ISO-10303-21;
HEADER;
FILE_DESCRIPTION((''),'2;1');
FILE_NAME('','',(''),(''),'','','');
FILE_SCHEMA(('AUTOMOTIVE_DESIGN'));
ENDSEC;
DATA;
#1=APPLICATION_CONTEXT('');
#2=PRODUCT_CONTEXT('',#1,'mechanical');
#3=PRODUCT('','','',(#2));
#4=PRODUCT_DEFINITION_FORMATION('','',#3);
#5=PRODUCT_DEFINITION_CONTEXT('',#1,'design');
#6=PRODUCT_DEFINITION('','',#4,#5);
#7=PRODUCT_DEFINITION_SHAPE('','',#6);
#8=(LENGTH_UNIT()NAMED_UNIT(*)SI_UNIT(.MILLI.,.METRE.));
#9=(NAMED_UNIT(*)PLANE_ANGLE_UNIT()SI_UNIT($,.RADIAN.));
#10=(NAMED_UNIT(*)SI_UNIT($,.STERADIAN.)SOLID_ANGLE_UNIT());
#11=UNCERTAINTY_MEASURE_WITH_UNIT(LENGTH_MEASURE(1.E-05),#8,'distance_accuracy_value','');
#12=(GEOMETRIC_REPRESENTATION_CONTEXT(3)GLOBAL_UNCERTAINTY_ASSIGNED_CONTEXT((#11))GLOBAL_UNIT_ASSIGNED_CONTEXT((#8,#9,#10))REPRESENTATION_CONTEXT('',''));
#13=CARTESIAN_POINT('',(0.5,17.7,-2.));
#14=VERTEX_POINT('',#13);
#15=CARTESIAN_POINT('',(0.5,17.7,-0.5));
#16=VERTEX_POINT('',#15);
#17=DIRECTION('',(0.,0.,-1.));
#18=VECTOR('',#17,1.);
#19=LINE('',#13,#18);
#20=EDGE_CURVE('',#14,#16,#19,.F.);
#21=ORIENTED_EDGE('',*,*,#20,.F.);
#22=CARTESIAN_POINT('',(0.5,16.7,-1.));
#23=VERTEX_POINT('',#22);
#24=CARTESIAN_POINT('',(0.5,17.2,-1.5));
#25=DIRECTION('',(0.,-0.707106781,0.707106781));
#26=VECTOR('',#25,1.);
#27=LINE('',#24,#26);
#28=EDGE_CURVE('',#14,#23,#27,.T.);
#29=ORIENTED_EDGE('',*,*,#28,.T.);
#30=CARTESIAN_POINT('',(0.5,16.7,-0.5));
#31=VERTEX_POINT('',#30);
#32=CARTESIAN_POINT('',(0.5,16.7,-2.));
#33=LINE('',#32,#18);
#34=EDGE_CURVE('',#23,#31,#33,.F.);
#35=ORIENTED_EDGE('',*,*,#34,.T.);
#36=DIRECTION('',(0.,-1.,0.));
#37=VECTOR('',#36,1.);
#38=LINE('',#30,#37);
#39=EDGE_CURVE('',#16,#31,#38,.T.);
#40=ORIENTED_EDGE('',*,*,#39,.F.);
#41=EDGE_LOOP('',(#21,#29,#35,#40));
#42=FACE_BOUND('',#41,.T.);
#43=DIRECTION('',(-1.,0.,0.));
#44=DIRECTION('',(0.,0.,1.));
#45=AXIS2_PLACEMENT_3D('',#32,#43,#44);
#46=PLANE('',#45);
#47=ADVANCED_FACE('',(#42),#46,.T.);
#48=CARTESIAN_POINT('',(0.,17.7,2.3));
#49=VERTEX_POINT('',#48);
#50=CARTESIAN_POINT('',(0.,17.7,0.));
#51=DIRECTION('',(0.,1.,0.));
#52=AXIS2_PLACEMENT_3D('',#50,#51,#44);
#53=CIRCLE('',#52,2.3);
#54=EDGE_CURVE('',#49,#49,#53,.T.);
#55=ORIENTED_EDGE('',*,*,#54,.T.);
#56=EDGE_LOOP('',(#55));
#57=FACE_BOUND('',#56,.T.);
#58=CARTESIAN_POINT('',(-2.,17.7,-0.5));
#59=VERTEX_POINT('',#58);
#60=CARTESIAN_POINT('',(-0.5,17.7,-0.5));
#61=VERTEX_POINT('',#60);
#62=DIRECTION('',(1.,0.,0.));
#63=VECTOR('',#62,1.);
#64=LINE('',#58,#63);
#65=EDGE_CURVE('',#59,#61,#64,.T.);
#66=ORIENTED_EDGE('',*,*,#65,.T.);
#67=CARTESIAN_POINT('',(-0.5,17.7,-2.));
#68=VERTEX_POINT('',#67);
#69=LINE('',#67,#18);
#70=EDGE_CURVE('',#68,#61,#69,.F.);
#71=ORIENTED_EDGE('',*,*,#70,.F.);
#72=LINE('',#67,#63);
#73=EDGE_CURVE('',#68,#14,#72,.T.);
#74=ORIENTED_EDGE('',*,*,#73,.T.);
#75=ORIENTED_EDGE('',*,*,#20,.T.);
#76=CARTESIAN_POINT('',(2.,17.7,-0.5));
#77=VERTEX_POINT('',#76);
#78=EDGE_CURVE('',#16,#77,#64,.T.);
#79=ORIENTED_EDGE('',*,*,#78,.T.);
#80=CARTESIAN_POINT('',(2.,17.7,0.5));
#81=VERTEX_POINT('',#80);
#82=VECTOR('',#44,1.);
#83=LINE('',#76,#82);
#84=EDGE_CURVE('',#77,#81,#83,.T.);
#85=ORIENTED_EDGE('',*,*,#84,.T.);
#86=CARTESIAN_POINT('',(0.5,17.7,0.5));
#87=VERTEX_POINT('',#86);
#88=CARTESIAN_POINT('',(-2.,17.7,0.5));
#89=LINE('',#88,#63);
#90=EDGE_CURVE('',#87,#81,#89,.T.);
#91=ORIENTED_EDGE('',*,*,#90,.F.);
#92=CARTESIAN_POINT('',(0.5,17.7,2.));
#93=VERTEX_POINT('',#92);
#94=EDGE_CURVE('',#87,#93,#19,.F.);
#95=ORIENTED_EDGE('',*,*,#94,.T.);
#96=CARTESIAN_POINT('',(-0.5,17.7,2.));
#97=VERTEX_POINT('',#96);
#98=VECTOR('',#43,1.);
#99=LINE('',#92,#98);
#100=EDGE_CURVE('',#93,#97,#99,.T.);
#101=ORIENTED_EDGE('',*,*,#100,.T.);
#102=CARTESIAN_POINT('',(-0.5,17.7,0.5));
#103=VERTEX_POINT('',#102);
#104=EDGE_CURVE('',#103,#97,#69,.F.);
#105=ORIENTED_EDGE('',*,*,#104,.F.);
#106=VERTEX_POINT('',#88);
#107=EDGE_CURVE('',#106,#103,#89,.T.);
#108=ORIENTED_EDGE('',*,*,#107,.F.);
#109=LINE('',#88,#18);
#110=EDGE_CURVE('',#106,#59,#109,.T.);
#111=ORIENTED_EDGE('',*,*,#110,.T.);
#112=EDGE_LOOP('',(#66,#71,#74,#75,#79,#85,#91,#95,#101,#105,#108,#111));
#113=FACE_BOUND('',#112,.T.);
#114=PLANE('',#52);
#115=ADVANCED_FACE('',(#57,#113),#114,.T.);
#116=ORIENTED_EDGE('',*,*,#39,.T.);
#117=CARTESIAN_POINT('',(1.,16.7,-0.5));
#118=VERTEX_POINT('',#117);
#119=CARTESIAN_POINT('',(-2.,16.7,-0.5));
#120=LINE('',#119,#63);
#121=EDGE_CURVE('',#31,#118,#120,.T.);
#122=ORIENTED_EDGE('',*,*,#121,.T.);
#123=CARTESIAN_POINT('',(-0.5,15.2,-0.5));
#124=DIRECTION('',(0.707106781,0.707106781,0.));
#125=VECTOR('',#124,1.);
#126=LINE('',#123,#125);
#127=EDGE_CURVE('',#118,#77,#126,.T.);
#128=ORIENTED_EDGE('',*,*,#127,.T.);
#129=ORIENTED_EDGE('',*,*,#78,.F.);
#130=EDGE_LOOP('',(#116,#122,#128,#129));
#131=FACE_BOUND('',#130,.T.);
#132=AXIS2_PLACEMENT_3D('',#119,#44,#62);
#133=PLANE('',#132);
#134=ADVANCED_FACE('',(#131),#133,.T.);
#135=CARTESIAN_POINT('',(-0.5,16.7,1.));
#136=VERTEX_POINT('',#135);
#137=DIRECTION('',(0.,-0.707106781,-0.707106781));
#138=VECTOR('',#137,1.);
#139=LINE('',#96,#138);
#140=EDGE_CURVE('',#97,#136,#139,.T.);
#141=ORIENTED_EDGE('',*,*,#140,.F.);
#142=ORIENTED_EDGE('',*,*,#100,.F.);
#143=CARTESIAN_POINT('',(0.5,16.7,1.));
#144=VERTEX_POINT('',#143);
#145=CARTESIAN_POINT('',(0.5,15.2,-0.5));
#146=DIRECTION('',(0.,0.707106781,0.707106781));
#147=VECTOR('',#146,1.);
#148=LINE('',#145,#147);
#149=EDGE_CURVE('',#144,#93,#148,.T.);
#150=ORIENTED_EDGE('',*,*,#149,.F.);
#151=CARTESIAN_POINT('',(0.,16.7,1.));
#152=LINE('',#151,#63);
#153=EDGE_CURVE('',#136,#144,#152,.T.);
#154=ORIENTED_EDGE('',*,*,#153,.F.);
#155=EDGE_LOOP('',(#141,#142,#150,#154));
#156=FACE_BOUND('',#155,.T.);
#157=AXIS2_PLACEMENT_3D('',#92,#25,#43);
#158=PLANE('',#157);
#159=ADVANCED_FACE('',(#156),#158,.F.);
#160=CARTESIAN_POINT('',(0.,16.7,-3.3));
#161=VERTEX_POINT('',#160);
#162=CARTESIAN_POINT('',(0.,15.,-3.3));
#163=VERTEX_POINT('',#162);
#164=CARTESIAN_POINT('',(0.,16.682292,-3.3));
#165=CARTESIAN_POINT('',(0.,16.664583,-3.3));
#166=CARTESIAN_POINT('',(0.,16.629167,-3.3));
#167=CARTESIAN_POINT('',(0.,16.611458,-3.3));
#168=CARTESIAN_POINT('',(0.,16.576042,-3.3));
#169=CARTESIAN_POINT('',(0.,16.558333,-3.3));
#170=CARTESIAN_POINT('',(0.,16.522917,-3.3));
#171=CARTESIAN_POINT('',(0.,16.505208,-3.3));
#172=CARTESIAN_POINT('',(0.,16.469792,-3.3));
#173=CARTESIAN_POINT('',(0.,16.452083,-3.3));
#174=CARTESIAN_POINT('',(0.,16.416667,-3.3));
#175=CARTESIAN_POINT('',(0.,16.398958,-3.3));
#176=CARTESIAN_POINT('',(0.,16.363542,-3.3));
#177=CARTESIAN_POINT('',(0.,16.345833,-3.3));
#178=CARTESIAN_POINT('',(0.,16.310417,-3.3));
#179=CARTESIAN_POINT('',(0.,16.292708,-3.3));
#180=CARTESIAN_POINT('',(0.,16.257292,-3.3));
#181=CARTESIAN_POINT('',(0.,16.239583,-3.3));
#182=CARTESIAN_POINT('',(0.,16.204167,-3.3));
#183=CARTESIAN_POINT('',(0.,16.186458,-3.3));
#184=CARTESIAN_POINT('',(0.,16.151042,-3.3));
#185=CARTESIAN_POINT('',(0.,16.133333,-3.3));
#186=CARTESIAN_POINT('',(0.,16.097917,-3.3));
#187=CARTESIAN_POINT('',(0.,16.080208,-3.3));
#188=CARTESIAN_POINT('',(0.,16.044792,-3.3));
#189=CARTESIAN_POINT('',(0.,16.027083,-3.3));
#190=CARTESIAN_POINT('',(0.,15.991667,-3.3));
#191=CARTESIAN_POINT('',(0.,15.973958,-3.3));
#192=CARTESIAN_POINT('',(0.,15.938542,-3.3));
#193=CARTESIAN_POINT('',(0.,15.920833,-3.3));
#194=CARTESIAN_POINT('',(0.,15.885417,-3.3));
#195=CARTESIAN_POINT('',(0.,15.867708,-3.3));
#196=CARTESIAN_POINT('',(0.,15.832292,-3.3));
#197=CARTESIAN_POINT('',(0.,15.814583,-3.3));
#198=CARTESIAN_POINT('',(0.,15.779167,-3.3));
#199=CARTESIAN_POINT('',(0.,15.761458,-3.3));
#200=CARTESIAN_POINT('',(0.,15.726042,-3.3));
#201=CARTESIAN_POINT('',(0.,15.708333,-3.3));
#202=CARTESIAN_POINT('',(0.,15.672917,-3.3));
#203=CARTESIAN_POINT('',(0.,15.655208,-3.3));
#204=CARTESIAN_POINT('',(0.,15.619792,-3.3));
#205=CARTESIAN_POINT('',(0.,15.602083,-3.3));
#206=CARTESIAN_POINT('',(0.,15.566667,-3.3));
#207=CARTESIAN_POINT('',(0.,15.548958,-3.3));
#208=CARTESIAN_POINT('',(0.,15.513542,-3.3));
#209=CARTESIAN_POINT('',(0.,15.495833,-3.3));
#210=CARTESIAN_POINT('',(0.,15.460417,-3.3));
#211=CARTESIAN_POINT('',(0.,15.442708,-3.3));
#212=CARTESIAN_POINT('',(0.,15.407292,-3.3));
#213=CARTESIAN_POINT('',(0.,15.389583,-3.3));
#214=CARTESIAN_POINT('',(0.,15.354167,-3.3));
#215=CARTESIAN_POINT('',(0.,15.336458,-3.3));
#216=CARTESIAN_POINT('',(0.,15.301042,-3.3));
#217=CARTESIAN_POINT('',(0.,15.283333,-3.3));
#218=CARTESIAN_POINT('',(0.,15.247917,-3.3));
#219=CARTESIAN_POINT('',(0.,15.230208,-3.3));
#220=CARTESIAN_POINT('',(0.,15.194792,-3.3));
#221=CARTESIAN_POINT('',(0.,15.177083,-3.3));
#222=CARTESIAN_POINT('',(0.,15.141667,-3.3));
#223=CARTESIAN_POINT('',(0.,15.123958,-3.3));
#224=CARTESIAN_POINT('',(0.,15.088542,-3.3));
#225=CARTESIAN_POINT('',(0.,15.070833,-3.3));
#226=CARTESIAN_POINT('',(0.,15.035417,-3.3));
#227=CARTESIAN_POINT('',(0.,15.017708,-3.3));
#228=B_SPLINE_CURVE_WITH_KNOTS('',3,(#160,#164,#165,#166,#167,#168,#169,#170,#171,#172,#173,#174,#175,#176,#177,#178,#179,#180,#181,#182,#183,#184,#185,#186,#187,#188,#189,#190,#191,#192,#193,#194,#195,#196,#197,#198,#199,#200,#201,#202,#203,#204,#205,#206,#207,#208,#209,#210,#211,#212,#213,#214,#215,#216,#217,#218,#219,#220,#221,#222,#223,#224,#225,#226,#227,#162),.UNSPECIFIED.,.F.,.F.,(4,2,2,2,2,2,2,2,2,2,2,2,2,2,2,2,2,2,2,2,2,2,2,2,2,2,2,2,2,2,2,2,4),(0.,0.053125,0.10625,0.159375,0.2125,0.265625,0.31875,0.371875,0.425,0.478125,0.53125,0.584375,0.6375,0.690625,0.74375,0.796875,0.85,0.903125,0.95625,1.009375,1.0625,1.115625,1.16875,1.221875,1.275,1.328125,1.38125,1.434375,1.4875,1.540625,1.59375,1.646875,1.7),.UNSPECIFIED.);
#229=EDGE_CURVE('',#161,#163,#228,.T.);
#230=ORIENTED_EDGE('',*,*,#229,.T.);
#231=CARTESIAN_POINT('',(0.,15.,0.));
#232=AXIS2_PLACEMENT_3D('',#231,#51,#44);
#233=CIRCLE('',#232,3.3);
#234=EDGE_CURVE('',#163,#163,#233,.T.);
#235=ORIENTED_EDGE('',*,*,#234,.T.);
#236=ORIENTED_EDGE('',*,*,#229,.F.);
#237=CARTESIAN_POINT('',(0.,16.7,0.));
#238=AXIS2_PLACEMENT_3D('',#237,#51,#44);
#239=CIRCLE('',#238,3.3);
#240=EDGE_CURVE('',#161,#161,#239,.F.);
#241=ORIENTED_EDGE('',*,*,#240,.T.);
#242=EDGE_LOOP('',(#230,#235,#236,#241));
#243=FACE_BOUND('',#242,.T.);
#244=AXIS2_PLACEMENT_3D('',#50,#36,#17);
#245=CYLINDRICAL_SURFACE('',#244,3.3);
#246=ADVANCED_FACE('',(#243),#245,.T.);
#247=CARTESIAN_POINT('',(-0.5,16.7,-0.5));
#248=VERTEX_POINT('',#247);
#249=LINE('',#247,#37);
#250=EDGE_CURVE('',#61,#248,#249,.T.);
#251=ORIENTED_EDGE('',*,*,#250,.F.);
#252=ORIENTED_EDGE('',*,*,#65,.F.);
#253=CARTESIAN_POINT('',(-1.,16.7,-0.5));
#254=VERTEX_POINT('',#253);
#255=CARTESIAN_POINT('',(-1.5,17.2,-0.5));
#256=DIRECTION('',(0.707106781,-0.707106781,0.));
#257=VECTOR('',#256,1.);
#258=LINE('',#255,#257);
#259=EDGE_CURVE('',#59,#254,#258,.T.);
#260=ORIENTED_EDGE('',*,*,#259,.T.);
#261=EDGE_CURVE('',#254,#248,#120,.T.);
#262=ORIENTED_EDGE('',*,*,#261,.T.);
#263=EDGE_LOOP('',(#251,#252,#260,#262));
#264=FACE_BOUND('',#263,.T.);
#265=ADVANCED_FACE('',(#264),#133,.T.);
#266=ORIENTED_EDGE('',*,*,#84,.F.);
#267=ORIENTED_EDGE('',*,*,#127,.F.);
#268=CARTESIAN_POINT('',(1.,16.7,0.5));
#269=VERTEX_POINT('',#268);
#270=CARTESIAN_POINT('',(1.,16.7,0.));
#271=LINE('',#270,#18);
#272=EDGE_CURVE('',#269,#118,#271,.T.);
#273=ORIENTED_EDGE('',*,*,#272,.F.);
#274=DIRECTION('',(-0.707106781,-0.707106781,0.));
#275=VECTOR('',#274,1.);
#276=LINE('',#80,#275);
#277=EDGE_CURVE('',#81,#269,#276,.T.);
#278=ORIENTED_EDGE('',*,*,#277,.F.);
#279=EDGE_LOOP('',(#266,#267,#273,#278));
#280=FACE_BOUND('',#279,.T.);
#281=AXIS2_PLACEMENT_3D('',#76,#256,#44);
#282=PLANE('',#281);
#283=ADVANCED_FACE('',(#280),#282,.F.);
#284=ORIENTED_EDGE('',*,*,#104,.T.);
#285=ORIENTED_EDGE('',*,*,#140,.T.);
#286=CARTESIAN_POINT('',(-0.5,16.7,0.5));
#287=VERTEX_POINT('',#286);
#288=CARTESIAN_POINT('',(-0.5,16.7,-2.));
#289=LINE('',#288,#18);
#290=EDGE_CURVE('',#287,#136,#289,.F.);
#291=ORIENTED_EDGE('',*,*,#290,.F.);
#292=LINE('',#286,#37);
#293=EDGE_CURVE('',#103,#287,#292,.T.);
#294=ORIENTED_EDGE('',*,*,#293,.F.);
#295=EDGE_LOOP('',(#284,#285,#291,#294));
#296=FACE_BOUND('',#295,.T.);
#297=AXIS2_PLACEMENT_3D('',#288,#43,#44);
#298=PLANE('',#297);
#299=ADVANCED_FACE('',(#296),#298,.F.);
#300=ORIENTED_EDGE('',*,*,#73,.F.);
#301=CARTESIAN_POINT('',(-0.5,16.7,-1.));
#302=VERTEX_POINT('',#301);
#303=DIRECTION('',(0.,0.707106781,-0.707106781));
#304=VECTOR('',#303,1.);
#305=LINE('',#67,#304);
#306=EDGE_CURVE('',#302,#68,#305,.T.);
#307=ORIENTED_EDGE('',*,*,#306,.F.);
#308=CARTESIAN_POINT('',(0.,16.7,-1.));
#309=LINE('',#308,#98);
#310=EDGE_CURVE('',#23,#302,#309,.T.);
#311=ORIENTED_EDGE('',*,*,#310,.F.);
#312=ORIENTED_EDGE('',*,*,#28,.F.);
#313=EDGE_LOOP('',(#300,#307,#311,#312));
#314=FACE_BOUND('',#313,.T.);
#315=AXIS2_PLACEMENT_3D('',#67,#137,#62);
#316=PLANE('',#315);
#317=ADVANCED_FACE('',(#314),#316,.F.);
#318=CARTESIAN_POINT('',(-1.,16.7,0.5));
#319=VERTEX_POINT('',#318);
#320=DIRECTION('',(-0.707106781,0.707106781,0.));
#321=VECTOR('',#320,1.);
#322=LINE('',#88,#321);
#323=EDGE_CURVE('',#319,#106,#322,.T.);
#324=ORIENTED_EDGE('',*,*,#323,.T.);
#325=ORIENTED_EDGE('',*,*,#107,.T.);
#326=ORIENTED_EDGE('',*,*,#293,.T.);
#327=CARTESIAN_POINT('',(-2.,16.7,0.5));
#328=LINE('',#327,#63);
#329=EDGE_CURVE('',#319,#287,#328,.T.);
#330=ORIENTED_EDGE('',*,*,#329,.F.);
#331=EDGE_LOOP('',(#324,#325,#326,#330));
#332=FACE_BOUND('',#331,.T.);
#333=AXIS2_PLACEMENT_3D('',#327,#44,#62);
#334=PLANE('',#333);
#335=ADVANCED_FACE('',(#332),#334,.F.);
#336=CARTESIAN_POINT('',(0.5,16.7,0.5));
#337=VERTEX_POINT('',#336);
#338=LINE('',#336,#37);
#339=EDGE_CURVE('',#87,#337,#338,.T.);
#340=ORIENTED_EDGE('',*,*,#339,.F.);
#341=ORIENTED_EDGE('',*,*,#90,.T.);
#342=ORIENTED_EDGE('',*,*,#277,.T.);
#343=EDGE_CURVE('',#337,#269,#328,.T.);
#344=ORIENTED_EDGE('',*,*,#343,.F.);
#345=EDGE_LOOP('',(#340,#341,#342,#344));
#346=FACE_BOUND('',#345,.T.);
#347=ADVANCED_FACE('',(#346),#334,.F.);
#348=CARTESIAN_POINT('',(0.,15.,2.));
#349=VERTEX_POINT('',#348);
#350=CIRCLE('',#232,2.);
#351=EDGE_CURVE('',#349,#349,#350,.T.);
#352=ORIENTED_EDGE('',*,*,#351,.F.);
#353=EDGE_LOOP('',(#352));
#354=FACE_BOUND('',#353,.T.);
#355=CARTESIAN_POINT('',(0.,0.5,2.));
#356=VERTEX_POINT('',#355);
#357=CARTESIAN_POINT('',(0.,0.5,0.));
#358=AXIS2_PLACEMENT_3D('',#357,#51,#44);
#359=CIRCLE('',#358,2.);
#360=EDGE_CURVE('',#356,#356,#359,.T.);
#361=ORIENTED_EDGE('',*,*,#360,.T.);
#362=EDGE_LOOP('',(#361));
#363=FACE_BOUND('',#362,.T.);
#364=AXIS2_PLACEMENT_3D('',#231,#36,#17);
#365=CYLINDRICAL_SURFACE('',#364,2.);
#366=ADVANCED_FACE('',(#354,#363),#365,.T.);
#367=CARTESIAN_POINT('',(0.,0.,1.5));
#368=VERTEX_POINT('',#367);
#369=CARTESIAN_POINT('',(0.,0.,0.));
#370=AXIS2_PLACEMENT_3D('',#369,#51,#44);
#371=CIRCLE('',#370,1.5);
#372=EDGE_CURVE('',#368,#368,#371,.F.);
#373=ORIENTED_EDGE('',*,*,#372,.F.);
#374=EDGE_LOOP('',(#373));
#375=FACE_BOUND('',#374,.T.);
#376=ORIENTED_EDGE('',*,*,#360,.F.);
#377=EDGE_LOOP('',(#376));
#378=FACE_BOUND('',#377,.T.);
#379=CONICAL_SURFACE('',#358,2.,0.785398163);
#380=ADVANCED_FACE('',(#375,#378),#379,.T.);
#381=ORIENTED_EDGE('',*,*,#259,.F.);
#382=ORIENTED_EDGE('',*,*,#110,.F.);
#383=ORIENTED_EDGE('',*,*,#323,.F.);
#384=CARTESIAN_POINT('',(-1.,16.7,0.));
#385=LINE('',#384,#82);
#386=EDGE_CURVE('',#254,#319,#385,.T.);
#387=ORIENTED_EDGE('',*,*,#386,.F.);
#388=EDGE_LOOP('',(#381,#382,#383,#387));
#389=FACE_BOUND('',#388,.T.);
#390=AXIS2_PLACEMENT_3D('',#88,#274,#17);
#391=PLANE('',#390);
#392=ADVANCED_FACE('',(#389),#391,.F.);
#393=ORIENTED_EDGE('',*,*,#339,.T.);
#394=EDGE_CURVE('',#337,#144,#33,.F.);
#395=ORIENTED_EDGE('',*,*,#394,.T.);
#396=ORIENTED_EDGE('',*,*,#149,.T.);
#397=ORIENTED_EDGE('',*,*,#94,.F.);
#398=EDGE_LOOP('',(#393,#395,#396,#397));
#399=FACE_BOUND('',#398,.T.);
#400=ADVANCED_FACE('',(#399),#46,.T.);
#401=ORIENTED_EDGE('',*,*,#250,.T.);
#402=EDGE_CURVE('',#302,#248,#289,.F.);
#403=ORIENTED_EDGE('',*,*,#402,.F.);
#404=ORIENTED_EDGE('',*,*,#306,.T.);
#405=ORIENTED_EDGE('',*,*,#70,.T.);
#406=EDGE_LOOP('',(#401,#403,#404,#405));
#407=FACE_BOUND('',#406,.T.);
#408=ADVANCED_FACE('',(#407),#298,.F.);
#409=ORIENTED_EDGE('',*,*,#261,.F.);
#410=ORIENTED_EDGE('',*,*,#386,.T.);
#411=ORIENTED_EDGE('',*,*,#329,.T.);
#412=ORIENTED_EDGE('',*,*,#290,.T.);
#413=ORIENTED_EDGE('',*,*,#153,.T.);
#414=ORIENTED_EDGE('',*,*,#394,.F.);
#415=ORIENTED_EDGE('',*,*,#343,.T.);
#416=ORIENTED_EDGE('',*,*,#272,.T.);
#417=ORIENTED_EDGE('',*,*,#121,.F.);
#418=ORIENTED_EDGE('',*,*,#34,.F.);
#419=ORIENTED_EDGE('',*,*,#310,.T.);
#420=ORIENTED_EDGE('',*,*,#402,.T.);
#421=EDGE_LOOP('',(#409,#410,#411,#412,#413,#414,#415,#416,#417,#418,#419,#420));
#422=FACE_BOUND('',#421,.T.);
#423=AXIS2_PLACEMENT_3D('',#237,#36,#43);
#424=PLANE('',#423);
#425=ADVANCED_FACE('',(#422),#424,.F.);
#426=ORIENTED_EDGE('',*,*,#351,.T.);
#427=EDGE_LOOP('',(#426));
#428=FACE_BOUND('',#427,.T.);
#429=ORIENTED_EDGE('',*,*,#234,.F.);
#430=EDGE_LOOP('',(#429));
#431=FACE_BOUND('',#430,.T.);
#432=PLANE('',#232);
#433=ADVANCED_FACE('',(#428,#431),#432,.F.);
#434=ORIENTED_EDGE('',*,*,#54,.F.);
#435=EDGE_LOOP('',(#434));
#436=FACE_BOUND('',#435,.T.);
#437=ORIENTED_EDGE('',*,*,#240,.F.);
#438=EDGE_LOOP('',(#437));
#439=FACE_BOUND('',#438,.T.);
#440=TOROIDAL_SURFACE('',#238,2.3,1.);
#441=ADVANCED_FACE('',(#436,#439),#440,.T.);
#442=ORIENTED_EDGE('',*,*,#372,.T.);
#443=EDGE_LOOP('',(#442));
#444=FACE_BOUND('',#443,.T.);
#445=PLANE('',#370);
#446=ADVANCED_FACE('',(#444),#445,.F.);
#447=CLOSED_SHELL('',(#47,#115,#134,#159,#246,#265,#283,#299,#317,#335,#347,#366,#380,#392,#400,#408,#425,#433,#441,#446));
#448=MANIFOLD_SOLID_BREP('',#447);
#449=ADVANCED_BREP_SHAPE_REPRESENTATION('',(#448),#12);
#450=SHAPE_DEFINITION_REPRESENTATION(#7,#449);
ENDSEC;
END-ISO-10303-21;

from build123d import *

# Parameters (mm, degrees)
SKETCH_1_R          = 2
EXTRUDE_1_DEPTH     = 15
SKETCH_2_R          = 3.3
EXTRUDE_2_DEPTH     = 2.7
FILLET_1_R          = 1
CHAMFER_1_SIZE      = 0.5
SKETCH_3_W          = 4
SKETCH_3_H          = 1
SKETCH_3_W_2        = 1
SKETCH_3_H_2        = 4
CUT_EXTRUDE_1_DEPTH = 1
CHAMFER_2_SIZE      = 1


with BuildPart() as part:
    # 草图1 → 凸台-拉伸1 (new body)
    with BuildSketch(Plane(origin=(0, 0, 0), x_dir=(1, 0, 0), z_dir=(0, 1, 0))):
        with Locations(Location((0, 0, 0), (0, 0, 270))):
            Circle(SKETCH_1_R)
    extrude(amount=EXTRUDE_1_DEPTH)

    # 草图2 → 凸台-拉伸2 (add)
    with BuildSketch(Plane(origin=(0, 15, 0), x_dir=(1, 0, 0), z_dir=(0, 1, 0))):
        with Locations(Location((0, 0, 0), (0, 0, 90))):
            Circle(SKETCH_2_R)
    extrude(amount=EXTRUDE_2_DEPTH)

    # 圆角1
    fillet_1_edges = [part.edges().sort_by_distance(p)[0] for p in [
        (0, 17.7, 3.3),
    ]]
    fillet(fillet_1_edges, radius=FILLET_1_R)

    # 倒角1
    chamfer_1_edges = [part.edges().sort_by_distance(p)[0] for p in [
        (0, 0, -2),
    ]]
    chamfer(chamfer_1_edges, length=CHAMFER_1_SIZE)

    # 草图3 → 切除-拉伸-薄壁1 (cut)
    with BuildSketch(Plane(origin=(0, 17.7, 0), x_dir=(1, 0, 0), z_dir=(0, 1, 0))):
        Rectangle(SKETCH_3_W, SKETCH_3_H)
        Rectangle(SKETCH_3_W_2, SKETCH_3_H_2)
    extrude(amount=-CUT_EXTRUDE_1_DEPTH, mode=Mode.SUBTRACT)

    # 倒角2
    chamfer_2_edges = [part.edges().sort_by_distance(p)[0] for p in [
        (0, 16.7, 2),
        (2, 16.7, 0),
        (0, 16.7, -2),
        (-2, 16.7, 0),
    ]]
    chamfer(chamfer_2_edges, length=CHAMFER_2_SIZE - 0.0001)  # a hair under: the kernel refuses the full size


solid = part.part
